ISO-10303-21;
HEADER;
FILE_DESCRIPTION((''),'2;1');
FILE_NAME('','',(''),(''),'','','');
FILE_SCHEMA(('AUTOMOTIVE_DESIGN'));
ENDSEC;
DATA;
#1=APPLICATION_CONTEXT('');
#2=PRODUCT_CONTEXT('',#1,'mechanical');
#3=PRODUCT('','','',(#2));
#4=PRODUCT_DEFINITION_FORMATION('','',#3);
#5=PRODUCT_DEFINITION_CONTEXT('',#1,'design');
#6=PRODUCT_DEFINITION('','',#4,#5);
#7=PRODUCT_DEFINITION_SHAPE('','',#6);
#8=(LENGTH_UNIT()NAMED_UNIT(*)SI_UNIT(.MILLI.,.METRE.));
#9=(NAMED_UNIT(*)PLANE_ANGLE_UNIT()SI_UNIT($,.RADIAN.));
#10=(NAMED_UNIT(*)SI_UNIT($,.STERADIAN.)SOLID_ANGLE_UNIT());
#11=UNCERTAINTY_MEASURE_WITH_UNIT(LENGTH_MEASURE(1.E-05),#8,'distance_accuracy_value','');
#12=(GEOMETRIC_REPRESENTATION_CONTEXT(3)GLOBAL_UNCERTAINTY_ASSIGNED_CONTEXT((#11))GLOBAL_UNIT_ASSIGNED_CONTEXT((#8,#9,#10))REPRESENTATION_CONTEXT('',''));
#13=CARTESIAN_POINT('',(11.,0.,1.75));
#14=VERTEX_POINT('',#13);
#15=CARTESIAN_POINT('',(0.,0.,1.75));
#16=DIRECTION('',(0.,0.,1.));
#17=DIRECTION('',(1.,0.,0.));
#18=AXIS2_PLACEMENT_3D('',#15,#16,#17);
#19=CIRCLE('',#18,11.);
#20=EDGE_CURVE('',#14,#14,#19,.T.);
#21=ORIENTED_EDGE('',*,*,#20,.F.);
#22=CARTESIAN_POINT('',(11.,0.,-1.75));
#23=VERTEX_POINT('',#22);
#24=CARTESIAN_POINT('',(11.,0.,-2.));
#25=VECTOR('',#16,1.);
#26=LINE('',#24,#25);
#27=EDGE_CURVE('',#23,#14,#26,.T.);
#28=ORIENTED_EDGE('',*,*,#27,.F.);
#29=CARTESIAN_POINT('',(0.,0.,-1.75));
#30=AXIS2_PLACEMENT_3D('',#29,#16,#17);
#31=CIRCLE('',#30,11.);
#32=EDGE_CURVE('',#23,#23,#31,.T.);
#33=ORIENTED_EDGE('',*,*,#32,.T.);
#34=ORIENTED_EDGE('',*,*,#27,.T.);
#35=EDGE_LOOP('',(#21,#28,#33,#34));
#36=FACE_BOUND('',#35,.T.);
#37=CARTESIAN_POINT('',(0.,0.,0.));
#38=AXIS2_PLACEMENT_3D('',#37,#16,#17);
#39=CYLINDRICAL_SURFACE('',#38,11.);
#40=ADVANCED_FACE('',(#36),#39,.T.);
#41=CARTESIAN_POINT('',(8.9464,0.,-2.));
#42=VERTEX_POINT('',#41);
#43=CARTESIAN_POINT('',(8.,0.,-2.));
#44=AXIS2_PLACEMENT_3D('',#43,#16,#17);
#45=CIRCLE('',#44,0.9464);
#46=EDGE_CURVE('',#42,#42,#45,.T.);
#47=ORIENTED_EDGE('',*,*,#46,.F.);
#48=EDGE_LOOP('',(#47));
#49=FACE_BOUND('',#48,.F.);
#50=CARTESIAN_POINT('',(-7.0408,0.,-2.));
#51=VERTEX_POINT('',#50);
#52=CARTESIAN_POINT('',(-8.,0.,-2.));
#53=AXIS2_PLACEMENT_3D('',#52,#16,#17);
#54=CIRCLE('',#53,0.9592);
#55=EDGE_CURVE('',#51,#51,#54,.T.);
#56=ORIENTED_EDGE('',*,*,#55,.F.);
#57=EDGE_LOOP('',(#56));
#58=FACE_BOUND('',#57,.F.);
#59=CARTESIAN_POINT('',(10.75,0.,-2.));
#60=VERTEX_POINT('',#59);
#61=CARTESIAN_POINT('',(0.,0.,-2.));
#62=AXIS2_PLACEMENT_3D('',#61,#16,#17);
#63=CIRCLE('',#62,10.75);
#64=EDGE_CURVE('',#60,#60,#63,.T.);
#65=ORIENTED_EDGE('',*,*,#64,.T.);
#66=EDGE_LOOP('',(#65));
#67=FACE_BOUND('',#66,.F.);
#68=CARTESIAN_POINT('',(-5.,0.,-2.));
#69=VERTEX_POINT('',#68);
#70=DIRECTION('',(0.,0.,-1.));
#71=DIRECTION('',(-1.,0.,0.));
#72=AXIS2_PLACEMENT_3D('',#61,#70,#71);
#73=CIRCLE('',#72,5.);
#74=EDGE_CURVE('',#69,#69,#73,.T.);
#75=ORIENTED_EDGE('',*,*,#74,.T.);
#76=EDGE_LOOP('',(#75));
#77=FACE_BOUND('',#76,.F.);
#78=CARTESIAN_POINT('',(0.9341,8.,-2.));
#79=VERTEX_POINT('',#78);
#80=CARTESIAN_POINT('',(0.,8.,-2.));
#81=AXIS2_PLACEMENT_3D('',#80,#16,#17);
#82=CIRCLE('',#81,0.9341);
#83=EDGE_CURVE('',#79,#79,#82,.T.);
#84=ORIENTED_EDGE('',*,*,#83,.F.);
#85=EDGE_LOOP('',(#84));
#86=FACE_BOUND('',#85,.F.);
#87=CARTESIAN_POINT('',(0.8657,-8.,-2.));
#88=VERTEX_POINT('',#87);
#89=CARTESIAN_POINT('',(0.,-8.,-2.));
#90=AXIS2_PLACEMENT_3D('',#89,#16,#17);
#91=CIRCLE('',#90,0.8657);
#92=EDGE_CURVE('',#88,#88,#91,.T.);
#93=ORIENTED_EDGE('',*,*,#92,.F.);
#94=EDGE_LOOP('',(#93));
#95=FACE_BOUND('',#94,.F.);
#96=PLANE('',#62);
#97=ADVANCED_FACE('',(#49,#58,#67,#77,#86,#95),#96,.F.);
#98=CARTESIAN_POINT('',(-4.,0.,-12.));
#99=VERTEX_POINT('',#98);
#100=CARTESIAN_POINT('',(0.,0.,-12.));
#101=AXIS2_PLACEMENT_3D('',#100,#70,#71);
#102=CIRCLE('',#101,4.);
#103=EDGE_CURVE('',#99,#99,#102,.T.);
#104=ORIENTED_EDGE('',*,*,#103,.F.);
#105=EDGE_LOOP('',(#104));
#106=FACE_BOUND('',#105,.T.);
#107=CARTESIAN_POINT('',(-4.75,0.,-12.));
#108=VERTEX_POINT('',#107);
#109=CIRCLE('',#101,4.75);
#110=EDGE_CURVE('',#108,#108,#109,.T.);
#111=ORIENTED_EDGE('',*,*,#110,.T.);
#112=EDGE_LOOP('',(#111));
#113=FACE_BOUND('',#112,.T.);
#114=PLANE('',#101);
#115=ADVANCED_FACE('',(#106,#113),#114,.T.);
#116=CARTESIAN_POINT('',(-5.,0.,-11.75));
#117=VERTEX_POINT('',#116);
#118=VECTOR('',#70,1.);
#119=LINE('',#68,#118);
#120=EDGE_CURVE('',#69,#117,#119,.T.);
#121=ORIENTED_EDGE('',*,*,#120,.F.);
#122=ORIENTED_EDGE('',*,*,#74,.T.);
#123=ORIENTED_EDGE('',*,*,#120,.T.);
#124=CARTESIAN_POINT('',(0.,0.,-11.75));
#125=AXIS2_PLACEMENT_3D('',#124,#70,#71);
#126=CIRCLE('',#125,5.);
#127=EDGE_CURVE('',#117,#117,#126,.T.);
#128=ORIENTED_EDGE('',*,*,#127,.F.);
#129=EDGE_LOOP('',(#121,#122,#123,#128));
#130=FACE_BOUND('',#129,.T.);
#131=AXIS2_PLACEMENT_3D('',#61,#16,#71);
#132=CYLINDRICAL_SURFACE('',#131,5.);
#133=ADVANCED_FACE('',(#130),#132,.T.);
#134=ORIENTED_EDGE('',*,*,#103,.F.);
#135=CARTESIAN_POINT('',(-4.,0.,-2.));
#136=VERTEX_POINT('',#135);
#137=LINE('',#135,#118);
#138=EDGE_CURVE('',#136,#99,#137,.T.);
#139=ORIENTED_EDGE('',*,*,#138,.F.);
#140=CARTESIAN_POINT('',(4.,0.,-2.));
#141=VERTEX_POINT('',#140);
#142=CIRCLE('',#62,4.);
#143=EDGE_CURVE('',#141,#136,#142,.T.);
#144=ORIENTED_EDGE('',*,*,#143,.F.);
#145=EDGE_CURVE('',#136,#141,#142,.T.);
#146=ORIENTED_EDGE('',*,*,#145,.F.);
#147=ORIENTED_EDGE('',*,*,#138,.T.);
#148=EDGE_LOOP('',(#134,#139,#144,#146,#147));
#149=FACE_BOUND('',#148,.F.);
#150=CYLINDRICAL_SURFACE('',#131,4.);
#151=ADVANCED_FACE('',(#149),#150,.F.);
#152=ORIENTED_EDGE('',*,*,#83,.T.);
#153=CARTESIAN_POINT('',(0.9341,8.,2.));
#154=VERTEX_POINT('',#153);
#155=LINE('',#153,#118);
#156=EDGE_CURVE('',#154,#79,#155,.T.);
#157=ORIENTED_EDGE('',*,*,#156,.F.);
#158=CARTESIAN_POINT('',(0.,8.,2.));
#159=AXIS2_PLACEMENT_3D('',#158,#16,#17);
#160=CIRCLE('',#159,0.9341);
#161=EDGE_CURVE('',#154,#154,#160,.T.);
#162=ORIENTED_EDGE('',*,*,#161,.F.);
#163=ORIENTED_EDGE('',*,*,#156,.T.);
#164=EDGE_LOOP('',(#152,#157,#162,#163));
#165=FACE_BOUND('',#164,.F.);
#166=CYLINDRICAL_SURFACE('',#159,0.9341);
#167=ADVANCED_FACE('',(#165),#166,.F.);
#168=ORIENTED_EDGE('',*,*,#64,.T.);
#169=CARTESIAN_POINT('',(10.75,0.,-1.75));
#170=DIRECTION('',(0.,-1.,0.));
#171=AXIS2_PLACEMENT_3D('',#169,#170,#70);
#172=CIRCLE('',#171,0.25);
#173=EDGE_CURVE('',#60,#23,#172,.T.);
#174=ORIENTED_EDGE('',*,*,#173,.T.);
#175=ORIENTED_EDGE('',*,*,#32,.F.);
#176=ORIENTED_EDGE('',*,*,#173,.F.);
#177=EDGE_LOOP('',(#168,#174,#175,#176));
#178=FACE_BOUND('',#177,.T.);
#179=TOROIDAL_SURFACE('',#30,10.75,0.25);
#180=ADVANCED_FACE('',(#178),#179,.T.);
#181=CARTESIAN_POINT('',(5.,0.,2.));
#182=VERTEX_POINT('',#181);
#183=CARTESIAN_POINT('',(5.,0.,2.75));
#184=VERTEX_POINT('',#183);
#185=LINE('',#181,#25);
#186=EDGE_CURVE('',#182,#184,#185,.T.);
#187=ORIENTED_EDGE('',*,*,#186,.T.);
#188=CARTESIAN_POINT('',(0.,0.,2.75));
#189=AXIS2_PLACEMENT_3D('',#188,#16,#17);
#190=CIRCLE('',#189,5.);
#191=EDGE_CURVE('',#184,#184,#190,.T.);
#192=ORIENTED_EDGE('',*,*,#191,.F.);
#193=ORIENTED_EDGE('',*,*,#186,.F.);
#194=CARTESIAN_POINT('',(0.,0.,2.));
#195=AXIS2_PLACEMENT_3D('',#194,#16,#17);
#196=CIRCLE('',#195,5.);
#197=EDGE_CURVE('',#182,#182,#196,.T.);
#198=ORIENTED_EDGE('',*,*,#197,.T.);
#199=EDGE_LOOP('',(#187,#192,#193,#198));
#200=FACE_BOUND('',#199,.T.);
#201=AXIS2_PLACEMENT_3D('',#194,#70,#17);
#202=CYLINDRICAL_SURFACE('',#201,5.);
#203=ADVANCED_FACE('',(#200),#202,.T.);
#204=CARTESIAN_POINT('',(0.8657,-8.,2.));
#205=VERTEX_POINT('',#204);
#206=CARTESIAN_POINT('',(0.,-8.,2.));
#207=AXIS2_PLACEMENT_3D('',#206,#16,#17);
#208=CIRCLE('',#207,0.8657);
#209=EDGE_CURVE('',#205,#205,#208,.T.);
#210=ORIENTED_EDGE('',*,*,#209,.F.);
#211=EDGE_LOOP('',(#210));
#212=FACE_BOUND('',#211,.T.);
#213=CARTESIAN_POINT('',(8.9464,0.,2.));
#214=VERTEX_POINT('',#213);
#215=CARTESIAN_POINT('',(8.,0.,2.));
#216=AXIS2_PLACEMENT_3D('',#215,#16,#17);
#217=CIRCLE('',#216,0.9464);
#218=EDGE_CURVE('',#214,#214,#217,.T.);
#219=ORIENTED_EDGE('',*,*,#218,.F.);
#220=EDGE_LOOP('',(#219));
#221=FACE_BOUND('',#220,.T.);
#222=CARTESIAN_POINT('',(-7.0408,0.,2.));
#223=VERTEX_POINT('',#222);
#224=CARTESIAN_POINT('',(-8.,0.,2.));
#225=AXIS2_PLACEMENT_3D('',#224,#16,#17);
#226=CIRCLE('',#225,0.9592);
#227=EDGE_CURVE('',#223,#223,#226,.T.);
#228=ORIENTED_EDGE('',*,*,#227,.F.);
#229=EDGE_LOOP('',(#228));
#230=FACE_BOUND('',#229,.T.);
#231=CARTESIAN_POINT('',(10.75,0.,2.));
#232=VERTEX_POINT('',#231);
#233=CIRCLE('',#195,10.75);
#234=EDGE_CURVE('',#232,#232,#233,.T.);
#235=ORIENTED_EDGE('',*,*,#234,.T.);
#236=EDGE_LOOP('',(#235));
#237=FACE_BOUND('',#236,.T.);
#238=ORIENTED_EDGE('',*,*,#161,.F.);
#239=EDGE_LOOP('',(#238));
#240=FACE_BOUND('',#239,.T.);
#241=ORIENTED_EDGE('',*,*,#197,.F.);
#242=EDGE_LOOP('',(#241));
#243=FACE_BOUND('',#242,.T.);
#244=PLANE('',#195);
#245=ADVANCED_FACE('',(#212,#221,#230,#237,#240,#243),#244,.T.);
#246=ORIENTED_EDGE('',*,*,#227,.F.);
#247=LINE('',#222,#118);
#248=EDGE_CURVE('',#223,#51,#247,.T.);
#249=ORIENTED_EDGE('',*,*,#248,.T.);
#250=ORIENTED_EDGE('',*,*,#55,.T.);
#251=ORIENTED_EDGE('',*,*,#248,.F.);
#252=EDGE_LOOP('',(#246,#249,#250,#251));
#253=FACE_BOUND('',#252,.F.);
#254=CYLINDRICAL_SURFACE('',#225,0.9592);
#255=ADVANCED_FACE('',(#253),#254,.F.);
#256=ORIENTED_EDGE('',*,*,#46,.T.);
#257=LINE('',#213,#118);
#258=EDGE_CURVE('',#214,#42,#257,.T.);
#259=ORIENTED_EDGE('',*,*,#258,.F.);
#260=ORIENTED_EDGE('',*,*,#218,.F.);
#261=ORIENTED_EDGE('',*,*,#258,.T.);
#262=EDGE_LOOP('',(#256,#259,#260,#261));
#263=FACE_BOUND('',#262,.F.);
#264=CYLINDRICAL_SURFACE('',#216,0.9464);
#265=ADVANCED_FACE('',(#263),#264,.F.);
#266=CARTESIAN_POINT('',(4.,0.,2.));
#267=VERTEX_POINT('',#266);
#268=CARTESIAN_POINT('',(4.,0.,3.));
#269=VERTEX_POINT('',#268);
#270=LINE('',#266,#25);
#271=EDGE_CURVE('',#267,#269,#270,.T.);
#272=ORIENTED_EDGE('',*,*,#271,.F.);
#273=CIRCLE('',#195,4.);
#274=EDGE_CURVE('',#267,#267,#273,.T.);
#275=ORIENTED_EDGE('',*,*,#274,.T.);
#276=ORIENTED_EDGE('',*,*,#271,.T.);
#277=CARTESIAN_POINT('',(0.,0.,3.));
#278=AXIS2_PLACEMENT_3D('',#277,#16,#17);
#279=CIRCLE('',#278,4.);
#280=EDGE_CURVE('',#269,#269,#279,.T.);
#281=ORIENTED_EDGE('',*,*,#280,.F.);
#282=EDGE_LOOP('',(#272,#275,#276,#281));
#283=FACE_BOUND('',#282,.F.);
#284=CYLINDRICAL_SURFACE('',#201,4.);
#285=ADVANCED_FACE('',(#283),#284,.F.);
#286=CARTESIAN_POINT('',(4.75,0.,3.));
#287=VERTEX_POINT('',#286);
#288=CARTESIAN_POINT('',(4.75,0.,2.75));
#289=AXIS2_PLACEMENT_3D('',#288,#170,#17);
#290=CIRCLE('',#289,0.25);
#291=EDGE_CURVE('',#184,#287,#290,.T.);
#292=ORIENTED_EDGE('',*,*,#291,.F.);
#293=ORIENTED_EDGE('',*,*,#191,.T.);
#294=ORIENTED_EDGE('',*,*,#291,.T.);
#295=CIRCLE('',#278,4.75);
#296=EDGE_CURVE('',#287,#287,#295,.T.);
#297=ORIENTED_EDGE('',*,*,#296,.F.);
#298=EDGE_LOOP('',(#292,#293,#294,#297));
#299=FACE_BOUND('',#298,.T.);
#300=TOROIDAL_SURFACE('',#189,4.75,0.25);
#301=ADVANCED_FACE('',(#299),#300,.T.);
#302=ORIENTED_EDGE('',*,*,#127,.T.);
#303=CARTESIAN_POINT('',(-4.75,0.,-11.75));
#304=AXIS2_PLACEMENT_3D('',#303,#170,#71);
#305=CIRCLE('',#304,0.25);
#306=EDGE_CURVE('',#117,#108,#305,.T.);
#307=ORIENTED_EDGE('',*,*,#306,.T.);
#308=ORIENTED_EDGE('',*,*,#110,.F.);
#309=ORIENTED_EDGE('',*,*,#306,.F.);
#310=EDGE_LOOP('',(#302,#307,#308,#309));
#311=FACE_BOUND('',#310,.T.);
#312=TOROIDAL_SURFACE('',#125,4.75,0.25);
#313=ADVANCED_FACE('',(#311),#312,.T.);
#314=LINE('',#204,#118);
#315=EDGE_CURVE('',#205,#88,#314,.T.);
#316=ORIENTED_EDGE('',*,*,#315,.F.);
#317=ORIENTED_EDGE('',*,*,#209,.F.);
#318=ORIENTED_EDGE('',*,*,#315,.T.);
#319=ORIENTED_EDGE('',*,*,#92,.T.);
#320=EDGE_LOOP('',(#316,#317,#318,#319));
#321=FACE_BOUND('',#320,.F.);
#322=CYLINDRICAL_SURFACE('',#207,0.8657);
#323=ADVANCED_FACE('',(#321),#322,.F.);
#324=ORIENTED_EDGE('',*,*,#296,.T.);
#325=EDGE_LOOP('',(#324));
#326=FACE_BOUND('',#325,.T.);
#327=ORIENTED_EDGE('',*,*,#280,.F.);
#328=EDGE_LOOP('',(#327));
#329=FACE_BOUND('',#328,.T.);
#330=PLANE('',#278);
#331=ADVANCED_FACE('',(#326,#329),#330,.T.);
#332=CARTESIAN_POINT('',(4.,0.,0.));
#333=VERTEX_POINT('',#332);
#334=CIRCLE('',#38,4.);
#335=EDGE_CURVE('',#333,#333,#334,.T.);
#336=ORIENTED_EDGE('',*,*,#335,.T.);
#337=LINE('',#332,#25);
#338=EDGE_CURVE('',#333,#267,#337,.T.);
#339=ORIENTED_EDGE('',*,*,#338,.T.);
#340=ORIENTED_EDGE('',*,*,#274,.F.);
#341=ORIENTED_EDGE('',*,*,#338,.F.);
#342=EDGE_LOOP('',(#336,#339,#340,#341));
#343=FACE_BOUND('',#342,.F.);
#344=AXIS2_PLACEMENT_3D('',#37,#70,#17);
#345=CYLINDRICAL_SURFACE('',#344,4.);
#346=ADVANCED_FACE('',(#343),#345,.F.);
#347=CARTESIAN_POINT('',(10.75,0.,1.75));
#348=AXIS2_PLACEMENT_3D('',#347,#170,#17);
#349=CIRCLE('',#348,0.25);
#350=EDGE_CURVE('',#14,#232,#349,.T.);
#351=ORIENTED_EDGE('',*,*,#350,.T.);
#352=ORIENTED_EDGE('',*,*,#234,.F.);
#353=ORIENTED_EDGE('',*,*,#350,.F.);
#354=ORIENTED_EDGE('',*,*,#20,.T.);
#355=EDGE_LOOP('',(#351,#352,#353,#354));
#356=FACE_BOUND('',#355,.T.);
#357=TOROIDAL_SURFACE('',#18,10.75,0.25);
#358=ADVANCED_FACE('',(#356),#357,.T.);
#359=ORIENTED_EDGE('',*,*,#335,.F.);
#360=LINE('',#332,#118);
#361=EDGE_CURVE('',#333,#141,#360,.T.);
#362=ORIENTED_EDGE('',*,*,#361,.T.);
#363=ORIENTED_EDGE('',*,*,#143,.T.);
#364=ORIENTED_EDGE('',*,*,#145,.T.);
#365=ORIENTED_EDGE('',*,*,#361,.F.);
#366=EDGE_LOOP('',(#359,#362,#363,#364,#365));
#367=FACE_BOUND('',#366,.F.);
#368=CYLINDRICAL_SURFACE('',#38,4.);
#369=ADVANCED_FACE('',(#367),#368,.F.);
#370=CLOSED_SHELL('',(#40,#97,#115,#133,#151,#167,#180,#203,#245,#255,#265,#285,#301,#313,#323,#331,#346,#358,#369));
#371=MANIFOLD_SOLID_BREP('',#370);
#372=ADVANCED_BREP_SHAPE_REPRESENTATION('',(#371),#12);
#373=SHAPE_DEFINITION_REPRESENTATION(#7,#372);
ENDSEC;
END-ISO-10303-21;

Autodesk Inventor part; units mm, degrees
ref_plane "YZ Plane" through (0, 0, 0) normal (1, 0, 0) x (0, 1, 0)
ref_plane "XZ Plane" through (0, 0, 0) normal (0, 1, 0) x (-1, 0, 0)
ref_plane "XY Plane" through (0, 0, 0) normal (0, 0, 1) x (1, 0, 0)
sketch "Sketch1" plane through (0, 0, 0) normal (0, 0, 1) x (1, 0, 0)
  circle A0 centre (0, 0) radius 11
  circle A1 centre (0, 0) radius 4
  dimension "d0" = 22
  dimension "d3" = 8
extrude "Extrusion2" add sketch "Sketch1" along normal mid plane 4
sketch "Sketch2" plane through (0, 0, 2) normal (0, 0, 1) x (1, 0, 0)
  circle A0 centre (0, 0) radius 4 projected
  circle A1 centre (0, 0) radius 11 projected
  circle A2 centre (0, 0) radius 5
  circle A3 centre (0, 0) radius 4
  dimension "d6" = 10
  dimension "d7" = 8
extrude "Extrusion3" add sketch "Sketch2" along normal blind 1 contours A2
sketch "Sketch3" plane through (0, 0, 2) normal (0, 0, 1) x (1, 0, 0)
  circle A0 centre (0, 0) radius 5 projected
  circle A1 centre (0, -8) radius 0.8657
  circle A2 centre (8, 0) radius 0.9464
  circle A3 centre (0, 8) radius 0.9341
  circle A4 centre (-8, 0) radius 0.9592
  dimension "d10" = 8
  dimension "d11" = 8
  dimension "d12" = 8
  dimension "d13" = 8
extrude "Extrusion4" cut sketch "Sketch3" against normal up to surface (4 mm away) contours A1 | A2 | A3 | A4
sketch "Sketch4" plane through (0, 0, -2) normal (0, 0, -1) x (-1, 0, 0)
  circle A0 centre (0, 0) radius 4 projected
  circle A1 centre (0, 0) radius 11 projected
  circle A2 centre (0, 0) radius 4
  circle A3 centre (0, 0) radius 5
  dimension "d16" = 10
extrude "Extrusion5" add sketch "Sketch4" along normal blind 10 contours A3
fillet "Fillet1" radius 0.25 4 edges at (-11, 0, -2) (-11, 0, 2) (5, 0, -12) (-5, 0, 3)
properties part number "Z Akse gevindstang møtrik" material "Brass, Soft Yellow"
